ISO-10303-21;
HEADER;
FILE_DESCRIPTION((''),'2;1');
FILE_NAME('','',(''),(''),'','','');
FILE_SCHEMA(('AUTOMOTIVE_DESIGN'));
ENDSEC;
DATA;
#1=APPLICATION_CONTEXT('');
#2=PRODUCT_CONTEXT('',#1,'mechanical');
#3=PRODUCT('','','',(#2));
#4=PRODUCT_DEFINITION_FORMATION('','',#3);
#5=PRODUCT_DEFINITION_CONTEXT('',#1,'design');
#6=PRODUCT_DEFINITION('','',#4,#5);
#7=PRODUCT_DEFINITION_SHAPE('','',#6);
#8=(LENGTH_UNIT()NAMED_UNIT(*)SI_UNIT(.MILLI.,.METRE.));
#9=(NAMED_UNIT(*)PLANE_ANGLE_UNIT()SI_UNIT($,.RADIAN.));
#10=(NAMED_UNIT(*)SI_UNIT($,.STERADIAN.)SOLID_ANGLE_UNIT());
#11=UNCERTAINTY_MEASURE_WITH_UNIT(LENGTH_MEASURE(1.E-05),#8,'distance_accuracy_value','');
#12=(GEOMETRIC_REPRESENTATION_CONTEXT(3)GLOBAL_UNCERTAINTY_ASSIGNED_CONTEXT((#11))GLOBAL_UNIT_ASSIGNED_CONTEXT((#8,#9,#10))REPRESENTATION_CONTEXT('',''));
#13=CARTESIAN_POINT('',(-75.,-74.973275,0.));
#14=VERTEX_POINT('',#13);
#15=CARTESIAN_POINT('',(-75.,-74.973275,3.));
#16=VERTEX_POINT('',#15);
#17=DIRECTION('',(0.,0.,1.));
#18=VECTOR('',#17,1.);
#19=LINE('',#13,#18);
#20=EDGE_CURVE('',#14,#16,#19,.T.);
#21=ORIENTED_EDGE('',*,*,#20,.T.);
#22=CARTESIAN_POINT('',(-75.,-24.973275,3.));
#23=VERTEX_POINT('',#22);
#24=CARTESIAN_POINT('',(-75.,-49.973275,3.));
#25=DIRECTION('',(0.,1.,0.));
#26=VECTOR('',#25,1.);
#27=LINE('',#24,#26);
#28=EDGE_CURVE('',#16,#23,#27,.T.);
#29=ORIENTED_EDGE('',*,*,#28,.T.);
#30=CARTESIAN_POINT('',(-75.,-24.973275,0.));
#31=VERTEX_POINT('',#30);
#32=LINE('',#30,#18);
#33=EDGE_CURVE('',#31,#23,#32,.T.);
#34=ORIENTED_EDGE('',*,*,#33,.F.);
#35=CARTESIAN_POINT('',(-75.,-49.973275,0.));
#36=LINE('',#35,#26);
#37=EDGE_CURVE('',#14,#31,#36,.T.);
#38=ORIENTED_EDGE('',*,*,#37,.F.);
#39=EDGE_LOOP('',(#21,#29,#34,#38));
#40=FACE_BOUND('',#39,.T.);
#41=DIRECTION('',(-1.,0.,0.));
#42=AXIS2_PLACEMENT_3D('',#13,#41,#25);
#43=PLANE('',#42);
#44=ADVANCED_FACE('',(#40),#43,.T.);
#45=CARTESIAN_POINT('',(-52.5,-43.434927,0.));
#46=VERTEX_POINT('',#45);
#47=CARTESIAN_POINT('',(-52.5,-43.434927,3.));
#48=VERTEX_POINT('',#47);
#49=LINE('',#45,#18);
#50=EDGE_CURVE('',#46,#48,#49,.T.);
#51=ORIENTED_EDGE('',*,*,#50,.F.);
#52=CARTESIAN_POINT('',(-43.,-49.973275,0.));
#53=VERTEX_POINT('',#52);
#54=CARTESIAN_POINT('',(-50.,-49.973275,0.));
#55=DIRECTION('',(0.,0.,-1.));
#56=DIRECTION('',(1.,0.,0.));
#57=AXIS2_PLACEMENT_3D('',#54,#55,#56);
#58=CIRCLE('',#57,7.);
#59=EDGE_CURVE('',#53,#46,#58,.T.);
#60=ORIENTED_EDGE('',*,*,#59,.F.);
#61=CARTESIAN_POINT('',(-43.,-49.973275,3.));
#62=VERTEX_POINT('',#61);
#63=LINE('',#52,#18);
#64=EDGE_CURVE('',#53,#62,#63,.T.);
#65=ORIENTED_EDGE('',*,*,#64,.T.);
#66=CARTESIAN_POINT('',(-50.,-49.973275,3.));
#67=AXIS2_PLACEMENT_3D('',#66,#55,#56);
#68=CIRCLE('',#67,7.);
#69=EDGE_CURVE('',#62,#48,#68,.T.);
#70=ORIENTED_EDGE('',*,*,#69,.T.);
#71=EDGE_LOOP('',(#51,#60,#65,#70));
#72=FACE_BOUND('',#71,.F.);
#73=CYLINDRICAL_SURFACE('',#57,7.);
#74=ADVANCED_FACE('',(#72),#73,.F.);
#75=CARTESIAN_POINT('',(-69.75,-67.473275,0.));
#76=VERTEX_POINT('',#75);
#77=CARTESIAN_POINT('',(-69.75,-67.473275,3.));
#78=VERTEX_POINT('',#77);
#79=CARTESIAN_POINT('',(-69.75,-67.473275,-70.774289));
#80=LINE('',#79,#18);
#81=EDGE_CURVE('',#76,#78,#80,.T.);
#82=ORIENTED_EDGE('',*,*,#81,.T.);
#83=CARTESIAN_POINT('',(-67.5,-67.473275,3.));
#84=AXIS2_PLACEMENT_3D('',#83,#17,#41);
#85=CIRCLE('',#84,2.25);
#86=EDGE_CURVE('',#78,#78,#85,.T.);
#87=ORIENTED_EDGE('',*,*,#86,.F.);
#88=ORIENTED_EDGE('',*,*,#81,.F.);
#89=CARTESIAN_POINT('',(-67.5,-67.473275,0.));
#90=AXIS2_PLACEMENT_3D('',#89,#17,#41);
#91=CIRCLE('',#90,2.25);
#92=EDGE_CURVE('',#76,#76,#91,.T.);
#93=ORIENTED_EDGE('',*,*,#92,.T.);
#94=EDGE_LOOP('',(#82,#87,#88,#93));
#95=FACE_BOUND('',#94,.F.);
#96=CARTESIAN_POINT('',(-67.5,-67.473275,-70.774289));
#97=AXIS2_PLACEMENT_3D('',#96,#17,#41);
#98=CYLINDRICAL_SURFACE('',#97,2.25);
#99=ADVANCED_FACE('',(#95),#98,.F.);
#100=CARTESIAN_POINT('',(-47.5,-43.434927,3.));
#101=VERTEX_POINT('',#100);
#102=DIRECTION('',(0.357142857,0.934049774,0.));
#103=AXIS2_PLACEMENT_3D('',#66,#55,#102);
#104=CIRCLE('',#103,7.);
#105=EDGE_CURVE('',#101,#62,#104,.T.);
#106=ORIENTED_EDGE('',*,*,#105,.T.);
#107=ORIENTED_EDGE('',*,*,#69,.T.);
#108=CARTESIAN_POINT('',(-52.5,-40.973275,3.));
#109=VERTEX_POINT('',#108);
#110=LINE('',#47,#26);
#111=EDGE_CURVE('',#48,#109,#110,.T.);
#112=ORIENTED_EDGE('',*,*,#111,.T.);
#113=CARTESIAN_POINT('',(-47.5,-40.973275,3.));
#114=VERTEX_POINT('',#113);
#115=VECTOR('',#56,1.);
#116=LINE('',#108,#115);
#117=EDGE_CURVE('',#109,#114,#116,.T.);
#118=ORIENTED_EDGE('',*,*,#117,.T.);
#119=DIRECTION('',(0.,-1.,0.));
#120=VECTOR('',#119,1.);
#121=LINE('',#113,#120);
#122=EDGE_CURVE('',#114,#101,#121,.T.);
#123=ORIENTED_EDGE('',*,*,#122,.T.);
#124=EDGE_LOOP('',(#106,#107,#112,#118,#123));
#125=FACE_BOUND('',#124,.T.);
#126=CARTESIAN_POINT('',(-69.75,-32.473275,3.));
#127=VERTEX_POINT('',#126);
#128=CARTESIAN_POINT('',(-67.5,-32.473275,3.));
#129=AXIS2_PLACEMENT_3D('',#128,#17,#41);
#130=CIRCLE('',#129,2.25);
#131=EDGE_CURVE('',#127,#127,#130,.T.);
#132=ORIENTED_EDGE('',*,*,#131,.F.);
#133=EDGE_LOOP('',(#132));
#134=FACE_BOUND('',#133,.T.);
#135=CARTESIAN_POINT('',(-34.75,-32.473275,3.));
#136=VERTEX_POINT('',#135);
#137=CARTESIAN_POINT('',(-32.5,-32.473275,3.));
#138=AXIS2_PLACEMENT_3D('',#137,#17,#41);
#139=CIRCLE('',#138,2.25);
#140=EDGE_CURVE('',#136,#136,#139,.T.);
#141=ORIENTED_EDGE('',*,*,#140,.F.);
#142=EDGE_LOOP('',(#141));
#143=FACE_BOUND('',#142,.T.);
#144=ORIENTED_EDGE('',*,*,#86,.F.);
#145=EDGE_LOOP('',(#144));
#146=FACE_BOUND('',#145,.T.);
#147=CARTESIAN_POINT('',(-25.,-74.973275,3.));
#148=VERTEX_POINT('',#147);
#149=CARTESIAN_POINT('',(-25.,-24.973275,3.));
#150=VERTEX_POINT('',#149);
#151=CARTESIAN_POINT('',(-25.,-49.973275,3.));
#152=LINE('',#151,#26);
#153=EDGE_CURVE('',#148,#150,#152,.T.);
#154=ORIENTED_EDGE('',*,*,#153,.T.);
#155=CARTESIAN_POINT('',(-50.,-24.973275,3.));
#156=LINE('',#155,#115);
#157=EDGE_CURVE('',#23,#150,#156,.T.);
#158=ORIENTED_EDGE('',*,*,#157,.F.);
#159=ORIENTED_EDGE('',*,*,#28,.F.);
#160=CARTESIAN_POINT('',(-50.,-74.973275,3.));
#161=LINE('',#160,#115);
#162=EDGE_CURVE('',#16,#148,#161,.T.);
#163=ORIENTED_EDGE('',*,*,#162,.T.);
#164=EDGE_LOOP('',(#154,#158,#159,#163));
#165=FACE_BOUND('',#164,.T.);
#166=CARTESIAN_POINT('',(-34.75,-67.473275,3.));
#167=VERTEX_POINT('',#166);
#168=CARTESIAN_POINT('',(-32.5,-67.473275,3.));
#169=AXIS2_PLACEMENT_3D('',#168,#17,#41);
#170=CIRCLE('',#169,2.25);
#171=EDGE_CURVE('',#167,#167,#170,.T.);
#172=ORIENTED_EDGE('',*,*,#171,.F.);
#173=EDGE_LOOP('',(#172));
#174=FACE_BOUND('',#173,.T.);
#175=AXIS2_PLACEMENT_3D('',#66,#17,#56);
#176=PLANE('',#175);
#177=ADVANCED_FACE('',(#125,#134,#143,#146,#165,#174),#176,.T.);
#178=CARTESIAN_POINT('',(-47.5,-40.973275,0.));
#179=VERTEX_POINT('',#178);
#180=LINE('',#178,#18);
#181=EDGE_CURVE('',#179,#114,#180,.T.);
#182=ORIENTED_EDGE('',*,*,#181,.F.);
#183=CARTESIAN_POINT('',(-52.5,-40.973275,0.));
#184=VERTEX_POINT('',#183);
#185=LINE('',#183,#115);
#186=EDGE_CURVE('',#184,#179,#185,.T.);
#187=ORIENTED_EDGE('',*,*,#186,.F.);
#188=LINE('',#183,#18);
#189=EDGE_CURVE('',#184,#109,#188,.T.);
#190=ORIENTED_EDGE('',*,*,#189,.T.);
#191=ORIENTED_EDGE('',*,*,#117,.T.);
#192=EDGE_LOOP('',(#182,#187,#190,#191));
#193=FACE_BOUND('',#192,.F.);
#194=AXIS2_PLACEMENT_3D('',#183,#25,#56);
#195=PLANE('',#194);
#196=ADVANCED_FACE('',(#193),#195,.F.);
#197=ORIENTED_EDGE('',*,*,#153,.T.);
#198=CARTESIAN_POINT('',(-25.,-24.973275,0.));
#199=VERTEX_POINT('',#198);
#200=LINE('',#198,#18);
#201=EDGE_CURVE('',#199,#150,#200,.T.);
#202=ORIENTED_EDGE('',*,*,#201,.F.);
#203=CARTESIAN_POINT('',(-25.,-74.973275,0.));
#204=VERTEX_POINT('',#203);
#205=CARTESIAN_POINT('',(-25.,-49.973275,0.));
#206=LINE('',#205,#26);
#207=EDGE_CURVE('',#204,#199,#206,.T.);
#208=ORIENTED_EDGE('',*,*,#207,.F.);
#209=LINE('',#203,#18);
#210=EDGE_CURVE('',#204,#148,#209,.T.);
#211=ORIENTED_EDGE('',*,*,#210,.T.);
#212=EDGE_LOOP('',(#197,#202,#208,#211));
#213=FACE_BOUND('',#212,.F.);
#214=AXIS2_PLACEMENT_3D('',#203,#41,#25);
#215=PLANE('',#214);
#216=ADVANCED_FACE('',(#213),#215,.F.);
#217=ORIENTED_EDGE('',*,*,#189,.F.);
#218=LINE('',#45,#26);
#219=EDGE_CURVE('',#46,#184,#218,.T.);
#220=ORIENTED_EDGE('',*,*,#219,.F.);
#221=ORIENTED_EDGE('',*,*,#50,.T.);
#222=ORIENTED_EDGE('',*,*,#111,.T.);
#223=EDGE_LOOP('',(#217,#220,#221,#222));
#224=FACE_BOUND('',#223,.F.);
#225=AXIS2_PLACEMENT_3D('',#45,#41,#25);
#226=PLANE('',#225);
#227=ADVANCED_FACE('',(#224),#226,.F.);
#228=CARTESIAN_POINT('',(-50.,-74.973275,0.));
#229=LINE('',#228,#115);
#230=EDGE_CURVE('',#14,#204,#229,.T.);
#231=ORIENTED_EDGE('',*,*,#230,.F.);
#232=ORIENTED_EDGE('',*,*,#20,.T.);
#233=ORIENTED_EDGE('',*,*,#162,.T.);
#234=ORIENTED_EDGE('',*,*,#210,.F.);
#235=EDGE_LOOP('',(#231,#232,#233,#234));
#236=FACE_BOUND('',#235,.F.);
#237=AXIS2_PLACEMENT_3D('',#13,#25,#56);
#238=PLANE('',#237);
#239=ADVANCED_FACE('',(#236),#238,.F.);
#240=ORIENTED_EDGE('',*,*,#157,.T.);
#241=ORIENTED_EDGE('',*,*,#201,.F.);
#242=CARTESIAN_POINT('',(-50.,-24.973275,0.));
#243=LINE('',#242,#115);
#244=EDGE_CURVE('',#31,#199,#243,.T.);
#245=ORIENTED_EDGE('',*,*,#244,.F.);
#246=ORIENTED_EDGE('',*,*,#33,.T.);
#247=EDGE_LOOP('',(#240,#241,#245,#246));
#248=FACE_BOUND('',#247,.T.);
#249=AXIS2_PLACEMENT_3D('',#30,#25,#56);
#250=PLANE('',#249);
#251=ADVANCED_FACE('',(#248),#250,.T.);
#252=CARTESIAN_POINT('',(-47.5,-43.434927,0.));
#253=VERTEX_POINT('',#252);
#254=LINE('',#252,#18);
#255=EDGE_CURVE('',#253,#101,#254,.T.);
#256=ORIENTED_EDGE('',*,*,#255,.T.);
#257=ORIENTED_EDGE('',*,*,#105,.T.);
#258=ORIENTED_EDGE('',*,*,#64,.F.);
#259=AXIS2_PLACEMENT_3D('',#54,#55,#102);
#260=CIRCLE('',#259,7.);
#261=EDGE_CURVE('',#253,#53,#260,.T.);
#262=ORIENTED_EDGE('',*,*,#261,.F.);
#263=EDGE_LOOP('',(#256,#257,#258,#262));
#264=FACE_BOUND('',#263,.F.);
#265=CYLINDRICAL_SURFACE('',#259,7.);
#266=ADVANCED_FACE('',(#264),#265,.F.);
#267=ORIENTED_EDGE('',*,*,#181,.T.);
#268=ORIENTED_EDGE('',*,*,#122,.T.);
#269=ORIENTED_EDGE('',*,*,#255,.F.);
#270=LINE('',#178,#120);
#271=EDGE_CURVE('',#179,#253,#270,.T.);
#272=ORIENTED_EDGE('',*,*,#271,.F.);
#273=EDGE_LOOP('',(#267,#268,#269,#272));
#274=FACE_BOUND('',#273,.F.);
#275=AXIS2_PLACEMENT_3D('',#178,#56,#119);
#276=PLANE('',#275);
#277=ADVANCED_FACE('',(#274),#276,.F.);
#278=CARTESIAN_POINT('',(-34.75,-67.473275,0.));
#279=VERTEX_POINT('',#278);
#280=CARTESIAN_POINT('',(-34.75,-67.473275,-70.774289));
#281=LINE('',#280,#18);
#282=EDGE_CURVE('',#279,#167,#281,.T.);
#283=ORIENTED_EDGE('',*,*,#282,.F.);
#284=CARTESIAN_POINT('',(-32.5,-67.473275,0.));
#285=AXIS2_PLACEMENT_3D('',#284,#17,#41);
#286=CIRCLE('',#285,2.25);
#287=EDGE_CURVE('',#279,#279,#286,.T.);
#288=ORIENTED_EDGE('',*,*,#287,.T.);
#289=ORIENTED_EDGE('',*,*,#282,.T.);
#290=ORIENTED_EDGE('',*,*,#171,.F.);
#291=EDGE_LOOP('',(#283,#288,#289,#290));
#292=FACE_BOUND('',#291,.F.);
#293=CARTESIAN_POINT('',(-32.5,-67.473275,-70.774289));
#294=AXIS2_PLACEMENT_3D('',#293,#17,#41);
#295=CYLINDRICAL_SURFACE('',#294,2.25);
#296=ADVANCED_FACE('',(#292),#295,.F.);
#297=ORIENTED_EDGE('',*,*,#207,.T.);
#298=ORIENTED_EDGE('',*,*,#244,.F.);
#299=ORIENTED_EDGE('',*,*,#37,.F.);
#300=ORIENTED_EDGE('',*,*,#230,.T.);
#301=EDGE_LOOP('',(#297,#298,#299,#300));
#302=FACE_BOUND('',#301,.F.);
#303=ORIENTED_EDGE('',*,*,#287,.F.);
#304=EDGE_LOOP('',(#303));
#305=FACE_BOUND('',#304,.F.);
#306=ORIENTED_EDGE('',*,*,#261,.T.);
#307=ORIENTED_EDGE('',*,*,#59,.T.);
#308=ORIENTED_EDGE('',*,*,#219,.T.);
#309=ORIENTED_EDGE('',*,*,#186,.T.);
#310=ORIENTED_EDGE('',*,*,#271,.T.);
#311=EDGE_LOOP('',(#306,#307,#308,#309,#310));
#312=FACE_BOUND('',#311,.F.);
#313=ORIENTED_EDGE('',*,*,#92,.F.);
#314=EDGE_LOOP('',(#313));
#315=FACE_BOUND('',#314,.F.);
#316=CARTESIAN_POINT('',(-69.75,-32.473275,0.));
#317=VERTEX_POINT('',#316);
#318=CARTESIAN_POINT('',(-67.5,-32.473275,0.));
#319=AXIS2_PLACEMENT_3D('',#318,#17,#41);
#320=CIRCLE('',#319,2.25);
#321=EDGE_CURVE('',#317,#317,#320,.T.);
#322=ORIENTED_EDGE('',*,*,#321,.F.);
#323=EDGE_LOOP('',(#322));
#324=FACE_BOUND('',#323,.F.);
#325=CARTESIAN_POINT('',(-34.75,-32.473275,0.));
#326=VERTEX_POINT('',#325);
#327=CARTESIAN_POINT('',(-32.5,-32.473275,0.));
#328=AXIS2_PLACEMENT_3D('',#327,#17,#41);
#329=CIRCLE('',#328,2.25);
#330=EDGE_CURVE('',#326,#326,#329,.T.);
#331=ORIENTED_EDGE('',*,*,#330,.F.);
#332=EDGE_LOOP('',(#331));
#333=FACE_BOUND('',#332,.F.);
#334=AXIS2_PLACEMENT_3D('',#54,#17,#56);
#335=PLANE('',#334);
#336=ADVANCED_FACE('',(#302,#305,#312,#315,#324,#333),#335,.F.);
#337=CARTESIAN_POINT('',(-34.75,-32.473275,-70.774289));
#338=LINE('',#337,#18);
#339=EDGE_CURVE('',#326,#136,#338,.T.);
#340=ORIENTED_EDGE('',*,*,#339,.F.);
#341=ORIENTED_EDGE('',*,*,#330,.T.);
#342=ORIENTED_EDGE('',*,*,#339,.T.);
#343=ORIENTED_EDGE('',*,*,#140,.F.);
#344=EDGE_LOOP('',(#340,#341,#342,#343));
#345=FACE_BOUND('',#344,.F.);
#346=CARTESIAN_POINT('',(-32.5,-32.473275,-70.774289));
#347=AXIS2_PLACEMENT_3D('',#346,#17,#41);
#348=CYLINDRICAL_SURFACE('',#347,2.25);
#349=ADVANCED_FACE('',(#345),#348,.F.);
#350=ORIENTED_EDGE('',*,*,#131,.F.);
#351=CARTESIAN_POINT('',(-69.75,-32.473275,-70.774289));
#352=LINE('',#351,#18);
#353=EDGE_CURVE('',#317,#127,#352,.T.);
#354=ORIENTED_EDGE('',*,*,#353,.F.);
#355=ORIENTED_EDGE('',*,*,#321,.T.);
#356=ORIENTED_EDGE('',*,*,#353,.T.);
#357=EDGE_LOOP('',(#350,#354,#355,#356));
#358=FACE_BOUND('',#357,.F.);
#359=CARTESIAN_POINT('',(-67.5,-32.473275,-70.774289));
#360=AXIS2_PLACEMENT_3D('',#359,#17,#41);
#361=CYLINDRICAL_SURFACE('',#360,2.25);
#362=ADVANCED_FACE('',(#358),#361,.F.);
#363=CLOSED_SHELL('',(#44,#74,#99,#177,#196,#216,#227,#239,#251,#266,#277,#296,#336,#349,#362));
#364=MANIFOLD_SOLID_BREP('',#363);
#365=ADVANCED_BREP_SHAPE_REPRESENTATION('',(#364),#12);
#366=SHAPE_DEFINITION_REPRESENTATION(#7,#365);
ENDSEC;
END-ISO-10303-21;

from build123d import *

# Parameters (mm, degrees)
F0_W     = 50
F0_H     = 50
F0_R     = 2
F1_DEPTH = 3
F2_D     = 4.5


# Not quite as in the source:
# - a feature names something its author has since deleted; it is built from what else it names


with BuildPart() as f1:
    # F0 (on Top) → F1 (new body)
    with BuildSketch(Plane.XY):
        with Locations((-50, -49.9732751399)):
            Rectangle(F0_W, F0_H)
        with Locations((-67.5, -67.4732751399)):
            Circle(F0_R, mode=Mode.SUBTRACT)
        with Locations((-32.5, -67.4732751399)):
            Circle(F0_R, mode=Mode.SUBTRACT)
        with Locations((-67.5, -32.4732751399)):
            Circle(F0_R, mode=Mode.SUBTRACT)
        with BuildLine():
            Line((-47.5, -40.9732751399), (-47.5, -43.4349267246))
            ThreePointArc((-47.5, -43.4349267246), (-44.2337187027, -46.0046481733), (-43, -49.9732751399))
            ThreePointArc((-43, -49.9732751399), (-53.9686269666, -55.7395564373), (-52.5, -43.4349267246))
            Line((-52.5, -43.4349267246), (-52.5, -40.9732751399))
            Line((-52.5, -40.9732751399), (-47.5, -40.9732751399))
        make_face(mode=Mode.SUBTRACT)
        with Locations((-32.5, -32.4732751399)):
            Circle(F0_R, mode=Mode.SUBTRACT)
    extrude(amount=F1_DEPTH)

    # F2 (through all)
    with Locations(Plane(origin=(0, 0, 0), x_dir=(1, 0, 0), z_dir=(0, 0, -1))):
        with Locations((-32.5, 32.4732751399), (-32.5, 67.4732751399), (-67.5, 67.4732751399), (-67.5, 32.4732751399)):
            Hole(F2_D / 2)


solid = f1.part
